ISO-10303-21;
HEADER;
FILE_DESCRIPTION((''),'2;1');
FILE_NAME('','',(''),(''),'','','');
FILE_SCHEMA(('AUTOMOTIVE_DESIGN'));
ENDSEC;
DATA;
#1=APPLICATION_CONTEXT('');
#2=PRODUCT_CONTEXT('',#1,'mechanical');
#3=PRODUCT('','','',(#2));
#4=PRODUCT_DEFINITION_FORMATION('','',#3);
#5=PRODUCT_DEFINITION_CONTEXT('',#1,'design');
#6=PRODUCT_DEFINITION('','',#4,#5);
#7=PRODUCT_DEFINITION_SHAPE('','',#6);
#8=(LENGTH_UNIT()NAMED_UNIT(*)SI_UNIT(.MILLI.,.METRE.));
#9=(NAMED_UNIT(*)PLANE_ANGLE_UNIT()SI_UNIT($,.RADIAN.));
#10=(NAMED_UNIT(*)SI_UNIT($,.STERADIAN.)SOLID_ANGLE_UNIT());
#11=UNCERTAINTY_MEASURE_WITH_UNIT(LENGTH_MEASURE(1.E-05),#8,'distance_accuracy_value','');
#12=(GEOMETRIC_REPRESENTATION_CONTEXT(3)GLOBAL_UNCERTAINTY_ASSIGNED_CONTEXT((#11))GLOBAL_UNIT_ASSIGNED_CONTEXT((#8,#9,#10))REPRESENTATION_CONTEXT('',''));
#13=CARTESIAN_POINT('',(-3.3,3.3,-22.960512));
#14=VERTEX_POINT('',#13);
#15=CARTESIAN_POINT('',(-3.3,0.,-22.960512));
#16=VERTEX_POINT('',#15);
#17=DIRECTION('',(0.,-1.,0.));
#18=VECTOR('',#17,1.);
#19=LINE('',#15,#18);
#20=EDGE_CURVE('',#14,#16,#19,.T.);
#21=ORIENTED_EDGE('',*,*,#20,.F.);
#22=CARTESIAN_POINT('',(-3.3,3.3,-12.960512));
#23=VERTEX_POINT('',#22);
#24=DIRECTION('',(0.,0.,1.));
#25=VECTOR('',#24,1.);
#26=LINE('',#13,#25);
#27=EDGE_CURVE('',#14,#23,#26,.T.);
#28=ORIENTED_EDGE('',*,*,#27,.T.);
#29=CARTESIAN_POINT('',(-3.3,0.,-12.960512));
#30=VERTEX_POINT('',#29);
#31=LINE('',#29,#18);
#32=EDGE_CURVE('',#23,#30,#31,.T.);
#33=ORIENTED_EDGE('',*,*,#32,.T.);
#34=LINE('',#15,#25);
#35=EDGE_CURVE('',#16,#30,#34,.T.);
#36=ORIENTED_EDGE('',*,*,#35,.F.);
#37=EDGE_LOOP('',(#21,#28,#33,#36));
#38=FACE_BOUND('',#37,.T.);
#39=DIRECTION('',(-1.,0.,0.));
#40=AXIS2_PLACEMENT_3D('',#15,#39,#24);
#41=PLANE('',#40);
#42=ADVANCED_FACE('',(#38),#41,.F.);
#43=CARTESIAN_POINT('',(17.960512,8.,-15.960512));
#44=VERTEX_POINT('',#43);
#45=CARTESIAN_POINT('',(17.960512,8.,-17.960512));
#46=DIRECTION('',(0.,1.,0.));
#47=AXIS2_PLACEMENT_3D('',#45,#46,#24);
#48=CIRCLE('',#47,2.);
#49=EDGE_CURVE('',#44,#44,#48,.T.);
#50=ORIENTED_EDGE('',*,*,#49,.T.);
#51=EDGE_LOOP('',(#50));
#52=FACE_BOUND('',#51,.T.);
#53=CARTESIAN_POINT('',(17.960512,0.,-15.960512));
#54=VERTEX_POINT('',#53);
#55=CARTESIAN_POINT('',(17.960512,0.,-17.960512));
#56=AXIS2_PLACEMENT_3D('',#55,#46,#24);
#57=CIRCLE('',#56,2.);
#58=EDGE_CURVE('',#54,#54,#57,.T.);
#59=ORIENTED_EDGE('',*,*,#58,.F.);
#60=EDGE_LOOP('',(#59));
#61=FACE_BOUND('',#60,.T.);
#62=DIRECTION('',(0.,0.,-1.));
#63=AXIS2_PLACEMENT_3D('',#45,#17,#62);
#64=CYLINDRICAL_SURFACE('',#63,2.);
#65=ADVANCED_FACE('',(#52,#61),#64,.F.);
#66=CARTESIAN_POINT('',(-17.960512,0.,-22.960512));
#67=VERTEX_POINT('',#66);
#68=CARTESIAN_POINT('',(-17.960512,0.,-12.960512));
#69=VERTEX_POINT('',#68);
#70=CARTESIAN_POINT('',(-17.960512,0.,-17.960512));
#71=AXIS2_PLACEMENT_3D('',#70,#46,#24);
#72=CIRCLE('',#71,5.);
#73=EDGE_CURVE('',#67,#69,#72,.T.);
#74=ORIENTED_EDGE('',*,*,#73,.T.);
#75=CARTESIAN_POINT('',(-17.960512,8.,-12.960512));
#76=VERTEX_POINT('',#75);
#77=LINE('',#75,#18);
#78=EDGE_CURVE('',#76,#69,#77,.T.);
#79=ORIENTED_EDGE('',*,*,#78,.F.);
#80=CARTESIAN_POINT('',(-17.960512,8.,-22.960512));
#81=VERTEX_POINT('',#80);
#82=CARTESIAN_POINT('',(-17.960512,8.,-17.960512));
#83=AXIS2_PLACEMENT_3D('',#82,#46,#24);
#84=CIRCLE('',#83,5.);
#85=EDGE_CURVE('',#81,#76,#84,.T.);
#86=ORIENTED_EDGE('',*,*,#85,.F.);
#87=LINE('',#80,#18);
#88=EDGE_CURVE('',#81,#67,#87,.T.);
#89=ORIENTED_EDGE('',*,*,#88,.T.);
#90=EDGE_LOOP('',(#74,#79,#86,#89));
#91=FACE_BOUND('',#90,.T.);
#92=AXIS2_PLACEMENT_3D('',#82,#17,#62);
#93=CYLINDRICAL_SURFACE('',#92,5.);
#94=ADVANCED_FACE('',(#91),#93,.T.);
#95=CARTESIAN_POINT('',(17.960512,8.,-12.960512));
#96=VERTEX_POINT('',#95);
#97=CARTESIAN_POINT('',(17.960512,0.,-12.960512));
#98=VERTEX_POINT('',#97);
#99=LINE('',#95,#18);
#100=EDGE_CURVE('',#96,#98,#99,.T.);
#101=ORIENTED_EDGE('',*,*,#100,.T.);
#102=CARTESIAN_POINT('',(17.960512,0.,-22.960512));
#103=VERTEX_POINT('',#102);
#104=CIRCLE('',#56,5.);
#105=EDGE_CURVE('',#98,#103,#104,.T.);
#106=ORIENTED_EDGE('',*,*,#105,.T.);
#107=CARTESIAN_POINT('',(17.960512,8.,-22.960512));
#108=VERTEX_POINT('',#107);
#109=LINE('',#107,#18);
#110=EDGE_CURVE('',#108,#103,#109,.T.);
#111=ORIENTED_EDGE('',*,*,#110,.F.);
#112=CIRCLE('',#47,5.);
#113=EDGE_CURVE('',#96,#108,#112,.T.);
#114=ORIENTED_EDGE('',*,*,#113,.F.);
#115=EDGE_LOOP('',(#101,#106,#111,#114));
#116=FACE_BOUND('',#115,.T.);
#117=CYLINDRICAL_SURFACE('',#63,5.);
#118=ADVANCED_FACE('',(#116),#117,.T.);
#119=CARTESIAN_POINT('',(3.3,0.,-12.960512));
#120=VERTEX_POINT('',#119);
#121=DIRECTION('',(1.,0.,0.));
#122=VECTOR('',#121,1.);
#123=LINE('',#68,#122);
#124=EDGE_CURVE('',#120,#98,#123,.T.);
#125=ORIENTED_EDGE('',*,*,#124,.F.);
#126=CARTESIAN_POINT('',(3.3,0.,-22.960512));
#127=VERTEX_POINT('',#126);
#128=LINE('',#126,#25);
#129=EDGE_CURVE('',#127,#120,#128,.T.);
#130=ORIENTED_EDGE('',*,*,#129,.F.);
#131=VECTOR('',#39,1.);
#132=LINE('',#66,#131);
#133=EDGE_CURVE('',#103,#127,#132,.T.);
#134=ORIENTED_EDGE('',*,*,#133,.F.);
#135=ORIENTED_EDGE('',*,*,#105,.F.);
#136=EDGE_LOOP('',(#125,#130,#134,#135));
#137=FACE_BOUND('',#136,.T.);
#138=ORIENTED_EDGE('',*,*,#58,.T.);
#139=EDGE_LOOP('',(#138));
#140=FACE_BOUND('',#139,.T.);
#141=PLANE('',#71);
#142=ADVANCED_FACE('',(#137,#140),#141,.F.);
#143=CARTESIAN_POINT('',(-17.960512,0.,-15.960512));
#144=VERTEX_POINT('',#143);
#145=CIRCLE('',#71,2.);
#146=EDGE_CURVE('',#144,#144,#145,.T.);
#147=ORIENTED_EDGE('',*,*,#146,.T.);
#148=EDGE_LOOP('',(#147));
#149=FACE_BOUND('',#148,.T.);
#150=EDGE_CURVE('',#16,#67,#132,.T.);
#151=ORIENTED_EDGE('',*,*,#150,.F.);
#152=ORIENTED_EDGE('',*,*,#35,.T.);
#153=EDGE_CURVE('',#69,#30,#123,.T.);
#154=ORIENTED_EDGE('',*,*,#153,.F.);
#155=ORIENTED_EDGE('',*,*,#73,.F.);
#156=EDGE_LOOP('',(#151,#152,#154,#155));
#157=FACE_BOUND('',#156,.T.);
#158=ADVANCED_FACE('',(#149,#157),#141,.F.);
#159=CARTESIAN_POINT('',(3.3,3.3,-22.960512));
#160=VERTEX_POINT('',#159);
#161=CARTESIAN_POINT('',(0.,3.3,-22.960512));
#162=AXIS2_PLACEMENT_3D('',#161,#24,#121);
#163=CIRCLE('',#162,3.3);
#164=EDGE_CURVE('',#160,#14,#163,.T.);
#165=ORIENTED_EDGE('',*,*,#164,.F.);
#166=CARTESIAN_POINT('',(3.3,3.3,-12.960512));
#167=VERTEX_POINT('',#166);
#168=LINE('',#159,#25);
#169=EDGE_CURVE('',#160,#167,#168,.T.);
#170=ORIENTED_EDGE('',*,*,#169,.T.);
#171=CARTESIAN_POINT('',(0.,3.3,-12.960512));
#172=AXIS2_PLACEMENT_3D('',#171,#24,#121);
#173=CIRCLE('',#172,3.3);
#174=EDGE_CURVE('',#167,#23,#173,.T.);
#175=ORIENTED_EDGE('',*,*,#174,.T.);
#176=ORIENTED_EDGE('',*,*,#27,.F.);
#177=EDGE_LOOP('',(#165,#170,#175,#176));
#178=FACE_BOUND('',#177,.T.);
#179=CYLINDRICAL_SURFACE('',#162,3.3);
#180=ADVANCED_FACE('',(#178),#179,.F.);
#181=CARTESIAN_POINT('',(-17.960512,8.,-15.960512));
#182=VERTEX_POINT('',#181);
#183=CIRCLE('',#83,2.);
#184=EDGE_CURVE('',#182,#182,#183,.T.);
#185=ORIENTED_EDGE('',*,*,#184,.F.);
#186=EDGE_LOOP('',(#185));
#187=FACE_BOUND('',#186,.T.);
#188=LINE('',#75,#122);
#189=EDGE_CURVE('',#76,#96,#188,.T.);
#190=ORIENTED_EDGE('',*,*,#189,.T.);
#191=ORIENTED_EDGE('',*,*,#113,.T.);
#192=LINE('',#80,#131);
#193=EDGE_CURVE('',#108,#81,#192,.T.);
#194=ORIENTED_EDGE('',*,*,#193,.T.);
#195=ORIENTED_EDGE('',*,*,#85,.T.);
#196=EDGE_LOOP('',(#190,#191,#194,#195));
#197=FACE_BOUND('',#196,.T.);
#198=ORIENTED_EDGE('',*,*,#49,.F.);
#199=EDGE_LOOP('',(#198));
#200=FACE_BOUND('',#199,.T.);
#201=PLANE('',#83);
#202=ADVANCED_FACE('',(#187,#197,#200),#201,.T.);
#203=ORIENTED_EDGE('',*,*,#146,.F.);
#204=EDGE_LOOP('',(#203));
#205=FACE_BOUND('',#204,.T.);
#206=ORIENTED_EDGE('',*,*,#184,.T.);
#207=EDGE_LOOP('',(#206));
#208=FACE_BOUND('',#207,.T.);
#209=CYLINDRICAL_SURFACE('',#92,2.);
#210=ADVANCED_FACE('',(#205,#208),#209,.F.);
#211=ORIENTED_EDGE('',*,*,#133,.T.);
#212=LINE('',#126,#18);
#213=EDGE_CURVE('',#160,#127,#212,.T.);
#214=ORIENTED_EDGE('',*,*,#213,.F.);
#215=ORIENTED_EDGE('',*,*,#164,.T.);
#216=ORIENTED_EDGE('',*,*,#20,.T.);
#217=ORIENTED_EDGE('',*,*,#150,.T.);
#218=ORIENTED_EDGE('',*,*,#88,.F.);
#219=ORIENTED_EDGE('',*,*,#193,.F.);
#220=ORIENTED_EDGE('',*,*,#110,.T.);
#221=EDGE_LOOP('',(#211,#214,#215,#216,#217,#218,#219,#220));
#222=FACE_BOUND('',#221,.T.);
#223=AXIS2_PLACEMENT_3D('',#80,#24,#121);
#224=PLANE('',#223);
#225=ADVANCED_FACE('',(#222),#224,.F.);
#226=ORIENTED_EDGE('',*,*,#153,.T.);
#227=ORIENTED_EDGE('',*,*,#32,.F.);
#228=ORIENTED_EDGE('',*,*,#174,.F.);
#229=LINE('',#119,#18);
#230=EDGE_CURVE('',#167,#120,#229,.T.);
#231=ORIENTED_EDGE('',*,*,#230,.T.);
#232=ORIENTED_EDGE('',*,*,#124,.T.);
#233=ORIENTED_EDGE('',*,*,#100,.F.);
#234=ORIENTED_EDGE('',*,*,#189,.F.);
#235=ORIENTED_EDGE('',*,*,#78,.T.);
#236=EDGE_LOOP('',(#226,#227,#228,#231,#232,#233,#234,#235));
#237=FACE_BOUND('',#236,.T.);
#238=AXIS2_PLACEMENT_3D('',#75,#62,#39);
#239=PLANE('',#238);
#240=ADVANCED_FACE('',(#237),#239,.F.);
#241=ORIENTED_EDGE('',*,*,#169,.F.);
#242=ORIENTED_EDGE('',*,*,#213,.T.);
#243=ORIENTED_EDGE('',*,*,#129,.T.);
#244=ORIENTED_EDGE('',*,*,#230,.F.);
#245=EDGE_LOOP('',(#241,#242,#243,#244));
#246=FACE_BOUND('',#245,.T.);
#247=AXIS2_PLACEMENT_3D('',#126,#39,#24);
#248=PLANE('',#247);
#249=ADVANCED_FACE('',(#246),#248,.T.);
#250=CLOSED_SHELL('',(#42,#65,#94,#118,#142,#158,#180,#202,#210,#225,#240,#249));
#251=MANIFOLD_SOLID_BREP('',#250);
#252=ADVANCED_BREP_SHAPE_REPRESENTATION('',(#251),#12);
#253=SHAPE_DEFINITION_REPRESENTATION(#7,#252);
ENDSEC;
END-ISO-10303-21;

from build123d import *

# Parameters (mm, degrees)
SKETCH1_R           = 2
BOSS_EXTRUDE1_DEPTH = 8
CUT_EXTRUDE1_DEPTH  = 27.290399815


with BuildPart() as part:
    # Sketch1 → Boss-Extrude1 (new body)
    with BuildSketch(Plane(origin=(0, 0, 0), x_dir=(1, 0, 0), z_dir=(0, 1, 0))):
        with BuildLine():
            Line((-17.960512242, 22.960512242), (17.960512242, 22.960512242))
            ThreePointArc((17.960512242, 22.960512242), (22.960512242, 17.960512242), (17.960512242, 12.960512242))
            Line((17.960512242, 12.960512242), (-17.960512242, 12.960512242))
            ThreePointArc((-17.960512242, 12.960512242), (-22.960512242, 17.960512242), (-17.960512242, 22.960512242))
        make_face()
        with Locations((-17.960512242, 17.960512242)):
            Circle(SKETCH1_R, mode=Mode.SUBTRACT)
        with Locations((17.960512242, 17.960512242)):
            Circle(SKETCH1_R, mode=Mode.SUBTRACT)
    extrude(amount=BOSS_EXTRUDE1_DEPTH)

    # Sketch2 → Cut-Extrude1 (cut, through all)
    with BuildSketch(Plane.XY.offset(-12.960512242)):
        with BuildLine():
            ThreePointArc((3.3, 3.3), (0, 6.6), (-3.3, 3.3))
            Line((-3.3, 3.3), (-3.3, 0))
            Line((-3.3, 0), (3.3, 0))
            Line((3.3, 0), (3.3, 3.3))
        make_face()
    extrude(amount=-CUT_EXTRUDE1_DEPTH, mode=Mode.SUBTRACT)


solid = part.part
